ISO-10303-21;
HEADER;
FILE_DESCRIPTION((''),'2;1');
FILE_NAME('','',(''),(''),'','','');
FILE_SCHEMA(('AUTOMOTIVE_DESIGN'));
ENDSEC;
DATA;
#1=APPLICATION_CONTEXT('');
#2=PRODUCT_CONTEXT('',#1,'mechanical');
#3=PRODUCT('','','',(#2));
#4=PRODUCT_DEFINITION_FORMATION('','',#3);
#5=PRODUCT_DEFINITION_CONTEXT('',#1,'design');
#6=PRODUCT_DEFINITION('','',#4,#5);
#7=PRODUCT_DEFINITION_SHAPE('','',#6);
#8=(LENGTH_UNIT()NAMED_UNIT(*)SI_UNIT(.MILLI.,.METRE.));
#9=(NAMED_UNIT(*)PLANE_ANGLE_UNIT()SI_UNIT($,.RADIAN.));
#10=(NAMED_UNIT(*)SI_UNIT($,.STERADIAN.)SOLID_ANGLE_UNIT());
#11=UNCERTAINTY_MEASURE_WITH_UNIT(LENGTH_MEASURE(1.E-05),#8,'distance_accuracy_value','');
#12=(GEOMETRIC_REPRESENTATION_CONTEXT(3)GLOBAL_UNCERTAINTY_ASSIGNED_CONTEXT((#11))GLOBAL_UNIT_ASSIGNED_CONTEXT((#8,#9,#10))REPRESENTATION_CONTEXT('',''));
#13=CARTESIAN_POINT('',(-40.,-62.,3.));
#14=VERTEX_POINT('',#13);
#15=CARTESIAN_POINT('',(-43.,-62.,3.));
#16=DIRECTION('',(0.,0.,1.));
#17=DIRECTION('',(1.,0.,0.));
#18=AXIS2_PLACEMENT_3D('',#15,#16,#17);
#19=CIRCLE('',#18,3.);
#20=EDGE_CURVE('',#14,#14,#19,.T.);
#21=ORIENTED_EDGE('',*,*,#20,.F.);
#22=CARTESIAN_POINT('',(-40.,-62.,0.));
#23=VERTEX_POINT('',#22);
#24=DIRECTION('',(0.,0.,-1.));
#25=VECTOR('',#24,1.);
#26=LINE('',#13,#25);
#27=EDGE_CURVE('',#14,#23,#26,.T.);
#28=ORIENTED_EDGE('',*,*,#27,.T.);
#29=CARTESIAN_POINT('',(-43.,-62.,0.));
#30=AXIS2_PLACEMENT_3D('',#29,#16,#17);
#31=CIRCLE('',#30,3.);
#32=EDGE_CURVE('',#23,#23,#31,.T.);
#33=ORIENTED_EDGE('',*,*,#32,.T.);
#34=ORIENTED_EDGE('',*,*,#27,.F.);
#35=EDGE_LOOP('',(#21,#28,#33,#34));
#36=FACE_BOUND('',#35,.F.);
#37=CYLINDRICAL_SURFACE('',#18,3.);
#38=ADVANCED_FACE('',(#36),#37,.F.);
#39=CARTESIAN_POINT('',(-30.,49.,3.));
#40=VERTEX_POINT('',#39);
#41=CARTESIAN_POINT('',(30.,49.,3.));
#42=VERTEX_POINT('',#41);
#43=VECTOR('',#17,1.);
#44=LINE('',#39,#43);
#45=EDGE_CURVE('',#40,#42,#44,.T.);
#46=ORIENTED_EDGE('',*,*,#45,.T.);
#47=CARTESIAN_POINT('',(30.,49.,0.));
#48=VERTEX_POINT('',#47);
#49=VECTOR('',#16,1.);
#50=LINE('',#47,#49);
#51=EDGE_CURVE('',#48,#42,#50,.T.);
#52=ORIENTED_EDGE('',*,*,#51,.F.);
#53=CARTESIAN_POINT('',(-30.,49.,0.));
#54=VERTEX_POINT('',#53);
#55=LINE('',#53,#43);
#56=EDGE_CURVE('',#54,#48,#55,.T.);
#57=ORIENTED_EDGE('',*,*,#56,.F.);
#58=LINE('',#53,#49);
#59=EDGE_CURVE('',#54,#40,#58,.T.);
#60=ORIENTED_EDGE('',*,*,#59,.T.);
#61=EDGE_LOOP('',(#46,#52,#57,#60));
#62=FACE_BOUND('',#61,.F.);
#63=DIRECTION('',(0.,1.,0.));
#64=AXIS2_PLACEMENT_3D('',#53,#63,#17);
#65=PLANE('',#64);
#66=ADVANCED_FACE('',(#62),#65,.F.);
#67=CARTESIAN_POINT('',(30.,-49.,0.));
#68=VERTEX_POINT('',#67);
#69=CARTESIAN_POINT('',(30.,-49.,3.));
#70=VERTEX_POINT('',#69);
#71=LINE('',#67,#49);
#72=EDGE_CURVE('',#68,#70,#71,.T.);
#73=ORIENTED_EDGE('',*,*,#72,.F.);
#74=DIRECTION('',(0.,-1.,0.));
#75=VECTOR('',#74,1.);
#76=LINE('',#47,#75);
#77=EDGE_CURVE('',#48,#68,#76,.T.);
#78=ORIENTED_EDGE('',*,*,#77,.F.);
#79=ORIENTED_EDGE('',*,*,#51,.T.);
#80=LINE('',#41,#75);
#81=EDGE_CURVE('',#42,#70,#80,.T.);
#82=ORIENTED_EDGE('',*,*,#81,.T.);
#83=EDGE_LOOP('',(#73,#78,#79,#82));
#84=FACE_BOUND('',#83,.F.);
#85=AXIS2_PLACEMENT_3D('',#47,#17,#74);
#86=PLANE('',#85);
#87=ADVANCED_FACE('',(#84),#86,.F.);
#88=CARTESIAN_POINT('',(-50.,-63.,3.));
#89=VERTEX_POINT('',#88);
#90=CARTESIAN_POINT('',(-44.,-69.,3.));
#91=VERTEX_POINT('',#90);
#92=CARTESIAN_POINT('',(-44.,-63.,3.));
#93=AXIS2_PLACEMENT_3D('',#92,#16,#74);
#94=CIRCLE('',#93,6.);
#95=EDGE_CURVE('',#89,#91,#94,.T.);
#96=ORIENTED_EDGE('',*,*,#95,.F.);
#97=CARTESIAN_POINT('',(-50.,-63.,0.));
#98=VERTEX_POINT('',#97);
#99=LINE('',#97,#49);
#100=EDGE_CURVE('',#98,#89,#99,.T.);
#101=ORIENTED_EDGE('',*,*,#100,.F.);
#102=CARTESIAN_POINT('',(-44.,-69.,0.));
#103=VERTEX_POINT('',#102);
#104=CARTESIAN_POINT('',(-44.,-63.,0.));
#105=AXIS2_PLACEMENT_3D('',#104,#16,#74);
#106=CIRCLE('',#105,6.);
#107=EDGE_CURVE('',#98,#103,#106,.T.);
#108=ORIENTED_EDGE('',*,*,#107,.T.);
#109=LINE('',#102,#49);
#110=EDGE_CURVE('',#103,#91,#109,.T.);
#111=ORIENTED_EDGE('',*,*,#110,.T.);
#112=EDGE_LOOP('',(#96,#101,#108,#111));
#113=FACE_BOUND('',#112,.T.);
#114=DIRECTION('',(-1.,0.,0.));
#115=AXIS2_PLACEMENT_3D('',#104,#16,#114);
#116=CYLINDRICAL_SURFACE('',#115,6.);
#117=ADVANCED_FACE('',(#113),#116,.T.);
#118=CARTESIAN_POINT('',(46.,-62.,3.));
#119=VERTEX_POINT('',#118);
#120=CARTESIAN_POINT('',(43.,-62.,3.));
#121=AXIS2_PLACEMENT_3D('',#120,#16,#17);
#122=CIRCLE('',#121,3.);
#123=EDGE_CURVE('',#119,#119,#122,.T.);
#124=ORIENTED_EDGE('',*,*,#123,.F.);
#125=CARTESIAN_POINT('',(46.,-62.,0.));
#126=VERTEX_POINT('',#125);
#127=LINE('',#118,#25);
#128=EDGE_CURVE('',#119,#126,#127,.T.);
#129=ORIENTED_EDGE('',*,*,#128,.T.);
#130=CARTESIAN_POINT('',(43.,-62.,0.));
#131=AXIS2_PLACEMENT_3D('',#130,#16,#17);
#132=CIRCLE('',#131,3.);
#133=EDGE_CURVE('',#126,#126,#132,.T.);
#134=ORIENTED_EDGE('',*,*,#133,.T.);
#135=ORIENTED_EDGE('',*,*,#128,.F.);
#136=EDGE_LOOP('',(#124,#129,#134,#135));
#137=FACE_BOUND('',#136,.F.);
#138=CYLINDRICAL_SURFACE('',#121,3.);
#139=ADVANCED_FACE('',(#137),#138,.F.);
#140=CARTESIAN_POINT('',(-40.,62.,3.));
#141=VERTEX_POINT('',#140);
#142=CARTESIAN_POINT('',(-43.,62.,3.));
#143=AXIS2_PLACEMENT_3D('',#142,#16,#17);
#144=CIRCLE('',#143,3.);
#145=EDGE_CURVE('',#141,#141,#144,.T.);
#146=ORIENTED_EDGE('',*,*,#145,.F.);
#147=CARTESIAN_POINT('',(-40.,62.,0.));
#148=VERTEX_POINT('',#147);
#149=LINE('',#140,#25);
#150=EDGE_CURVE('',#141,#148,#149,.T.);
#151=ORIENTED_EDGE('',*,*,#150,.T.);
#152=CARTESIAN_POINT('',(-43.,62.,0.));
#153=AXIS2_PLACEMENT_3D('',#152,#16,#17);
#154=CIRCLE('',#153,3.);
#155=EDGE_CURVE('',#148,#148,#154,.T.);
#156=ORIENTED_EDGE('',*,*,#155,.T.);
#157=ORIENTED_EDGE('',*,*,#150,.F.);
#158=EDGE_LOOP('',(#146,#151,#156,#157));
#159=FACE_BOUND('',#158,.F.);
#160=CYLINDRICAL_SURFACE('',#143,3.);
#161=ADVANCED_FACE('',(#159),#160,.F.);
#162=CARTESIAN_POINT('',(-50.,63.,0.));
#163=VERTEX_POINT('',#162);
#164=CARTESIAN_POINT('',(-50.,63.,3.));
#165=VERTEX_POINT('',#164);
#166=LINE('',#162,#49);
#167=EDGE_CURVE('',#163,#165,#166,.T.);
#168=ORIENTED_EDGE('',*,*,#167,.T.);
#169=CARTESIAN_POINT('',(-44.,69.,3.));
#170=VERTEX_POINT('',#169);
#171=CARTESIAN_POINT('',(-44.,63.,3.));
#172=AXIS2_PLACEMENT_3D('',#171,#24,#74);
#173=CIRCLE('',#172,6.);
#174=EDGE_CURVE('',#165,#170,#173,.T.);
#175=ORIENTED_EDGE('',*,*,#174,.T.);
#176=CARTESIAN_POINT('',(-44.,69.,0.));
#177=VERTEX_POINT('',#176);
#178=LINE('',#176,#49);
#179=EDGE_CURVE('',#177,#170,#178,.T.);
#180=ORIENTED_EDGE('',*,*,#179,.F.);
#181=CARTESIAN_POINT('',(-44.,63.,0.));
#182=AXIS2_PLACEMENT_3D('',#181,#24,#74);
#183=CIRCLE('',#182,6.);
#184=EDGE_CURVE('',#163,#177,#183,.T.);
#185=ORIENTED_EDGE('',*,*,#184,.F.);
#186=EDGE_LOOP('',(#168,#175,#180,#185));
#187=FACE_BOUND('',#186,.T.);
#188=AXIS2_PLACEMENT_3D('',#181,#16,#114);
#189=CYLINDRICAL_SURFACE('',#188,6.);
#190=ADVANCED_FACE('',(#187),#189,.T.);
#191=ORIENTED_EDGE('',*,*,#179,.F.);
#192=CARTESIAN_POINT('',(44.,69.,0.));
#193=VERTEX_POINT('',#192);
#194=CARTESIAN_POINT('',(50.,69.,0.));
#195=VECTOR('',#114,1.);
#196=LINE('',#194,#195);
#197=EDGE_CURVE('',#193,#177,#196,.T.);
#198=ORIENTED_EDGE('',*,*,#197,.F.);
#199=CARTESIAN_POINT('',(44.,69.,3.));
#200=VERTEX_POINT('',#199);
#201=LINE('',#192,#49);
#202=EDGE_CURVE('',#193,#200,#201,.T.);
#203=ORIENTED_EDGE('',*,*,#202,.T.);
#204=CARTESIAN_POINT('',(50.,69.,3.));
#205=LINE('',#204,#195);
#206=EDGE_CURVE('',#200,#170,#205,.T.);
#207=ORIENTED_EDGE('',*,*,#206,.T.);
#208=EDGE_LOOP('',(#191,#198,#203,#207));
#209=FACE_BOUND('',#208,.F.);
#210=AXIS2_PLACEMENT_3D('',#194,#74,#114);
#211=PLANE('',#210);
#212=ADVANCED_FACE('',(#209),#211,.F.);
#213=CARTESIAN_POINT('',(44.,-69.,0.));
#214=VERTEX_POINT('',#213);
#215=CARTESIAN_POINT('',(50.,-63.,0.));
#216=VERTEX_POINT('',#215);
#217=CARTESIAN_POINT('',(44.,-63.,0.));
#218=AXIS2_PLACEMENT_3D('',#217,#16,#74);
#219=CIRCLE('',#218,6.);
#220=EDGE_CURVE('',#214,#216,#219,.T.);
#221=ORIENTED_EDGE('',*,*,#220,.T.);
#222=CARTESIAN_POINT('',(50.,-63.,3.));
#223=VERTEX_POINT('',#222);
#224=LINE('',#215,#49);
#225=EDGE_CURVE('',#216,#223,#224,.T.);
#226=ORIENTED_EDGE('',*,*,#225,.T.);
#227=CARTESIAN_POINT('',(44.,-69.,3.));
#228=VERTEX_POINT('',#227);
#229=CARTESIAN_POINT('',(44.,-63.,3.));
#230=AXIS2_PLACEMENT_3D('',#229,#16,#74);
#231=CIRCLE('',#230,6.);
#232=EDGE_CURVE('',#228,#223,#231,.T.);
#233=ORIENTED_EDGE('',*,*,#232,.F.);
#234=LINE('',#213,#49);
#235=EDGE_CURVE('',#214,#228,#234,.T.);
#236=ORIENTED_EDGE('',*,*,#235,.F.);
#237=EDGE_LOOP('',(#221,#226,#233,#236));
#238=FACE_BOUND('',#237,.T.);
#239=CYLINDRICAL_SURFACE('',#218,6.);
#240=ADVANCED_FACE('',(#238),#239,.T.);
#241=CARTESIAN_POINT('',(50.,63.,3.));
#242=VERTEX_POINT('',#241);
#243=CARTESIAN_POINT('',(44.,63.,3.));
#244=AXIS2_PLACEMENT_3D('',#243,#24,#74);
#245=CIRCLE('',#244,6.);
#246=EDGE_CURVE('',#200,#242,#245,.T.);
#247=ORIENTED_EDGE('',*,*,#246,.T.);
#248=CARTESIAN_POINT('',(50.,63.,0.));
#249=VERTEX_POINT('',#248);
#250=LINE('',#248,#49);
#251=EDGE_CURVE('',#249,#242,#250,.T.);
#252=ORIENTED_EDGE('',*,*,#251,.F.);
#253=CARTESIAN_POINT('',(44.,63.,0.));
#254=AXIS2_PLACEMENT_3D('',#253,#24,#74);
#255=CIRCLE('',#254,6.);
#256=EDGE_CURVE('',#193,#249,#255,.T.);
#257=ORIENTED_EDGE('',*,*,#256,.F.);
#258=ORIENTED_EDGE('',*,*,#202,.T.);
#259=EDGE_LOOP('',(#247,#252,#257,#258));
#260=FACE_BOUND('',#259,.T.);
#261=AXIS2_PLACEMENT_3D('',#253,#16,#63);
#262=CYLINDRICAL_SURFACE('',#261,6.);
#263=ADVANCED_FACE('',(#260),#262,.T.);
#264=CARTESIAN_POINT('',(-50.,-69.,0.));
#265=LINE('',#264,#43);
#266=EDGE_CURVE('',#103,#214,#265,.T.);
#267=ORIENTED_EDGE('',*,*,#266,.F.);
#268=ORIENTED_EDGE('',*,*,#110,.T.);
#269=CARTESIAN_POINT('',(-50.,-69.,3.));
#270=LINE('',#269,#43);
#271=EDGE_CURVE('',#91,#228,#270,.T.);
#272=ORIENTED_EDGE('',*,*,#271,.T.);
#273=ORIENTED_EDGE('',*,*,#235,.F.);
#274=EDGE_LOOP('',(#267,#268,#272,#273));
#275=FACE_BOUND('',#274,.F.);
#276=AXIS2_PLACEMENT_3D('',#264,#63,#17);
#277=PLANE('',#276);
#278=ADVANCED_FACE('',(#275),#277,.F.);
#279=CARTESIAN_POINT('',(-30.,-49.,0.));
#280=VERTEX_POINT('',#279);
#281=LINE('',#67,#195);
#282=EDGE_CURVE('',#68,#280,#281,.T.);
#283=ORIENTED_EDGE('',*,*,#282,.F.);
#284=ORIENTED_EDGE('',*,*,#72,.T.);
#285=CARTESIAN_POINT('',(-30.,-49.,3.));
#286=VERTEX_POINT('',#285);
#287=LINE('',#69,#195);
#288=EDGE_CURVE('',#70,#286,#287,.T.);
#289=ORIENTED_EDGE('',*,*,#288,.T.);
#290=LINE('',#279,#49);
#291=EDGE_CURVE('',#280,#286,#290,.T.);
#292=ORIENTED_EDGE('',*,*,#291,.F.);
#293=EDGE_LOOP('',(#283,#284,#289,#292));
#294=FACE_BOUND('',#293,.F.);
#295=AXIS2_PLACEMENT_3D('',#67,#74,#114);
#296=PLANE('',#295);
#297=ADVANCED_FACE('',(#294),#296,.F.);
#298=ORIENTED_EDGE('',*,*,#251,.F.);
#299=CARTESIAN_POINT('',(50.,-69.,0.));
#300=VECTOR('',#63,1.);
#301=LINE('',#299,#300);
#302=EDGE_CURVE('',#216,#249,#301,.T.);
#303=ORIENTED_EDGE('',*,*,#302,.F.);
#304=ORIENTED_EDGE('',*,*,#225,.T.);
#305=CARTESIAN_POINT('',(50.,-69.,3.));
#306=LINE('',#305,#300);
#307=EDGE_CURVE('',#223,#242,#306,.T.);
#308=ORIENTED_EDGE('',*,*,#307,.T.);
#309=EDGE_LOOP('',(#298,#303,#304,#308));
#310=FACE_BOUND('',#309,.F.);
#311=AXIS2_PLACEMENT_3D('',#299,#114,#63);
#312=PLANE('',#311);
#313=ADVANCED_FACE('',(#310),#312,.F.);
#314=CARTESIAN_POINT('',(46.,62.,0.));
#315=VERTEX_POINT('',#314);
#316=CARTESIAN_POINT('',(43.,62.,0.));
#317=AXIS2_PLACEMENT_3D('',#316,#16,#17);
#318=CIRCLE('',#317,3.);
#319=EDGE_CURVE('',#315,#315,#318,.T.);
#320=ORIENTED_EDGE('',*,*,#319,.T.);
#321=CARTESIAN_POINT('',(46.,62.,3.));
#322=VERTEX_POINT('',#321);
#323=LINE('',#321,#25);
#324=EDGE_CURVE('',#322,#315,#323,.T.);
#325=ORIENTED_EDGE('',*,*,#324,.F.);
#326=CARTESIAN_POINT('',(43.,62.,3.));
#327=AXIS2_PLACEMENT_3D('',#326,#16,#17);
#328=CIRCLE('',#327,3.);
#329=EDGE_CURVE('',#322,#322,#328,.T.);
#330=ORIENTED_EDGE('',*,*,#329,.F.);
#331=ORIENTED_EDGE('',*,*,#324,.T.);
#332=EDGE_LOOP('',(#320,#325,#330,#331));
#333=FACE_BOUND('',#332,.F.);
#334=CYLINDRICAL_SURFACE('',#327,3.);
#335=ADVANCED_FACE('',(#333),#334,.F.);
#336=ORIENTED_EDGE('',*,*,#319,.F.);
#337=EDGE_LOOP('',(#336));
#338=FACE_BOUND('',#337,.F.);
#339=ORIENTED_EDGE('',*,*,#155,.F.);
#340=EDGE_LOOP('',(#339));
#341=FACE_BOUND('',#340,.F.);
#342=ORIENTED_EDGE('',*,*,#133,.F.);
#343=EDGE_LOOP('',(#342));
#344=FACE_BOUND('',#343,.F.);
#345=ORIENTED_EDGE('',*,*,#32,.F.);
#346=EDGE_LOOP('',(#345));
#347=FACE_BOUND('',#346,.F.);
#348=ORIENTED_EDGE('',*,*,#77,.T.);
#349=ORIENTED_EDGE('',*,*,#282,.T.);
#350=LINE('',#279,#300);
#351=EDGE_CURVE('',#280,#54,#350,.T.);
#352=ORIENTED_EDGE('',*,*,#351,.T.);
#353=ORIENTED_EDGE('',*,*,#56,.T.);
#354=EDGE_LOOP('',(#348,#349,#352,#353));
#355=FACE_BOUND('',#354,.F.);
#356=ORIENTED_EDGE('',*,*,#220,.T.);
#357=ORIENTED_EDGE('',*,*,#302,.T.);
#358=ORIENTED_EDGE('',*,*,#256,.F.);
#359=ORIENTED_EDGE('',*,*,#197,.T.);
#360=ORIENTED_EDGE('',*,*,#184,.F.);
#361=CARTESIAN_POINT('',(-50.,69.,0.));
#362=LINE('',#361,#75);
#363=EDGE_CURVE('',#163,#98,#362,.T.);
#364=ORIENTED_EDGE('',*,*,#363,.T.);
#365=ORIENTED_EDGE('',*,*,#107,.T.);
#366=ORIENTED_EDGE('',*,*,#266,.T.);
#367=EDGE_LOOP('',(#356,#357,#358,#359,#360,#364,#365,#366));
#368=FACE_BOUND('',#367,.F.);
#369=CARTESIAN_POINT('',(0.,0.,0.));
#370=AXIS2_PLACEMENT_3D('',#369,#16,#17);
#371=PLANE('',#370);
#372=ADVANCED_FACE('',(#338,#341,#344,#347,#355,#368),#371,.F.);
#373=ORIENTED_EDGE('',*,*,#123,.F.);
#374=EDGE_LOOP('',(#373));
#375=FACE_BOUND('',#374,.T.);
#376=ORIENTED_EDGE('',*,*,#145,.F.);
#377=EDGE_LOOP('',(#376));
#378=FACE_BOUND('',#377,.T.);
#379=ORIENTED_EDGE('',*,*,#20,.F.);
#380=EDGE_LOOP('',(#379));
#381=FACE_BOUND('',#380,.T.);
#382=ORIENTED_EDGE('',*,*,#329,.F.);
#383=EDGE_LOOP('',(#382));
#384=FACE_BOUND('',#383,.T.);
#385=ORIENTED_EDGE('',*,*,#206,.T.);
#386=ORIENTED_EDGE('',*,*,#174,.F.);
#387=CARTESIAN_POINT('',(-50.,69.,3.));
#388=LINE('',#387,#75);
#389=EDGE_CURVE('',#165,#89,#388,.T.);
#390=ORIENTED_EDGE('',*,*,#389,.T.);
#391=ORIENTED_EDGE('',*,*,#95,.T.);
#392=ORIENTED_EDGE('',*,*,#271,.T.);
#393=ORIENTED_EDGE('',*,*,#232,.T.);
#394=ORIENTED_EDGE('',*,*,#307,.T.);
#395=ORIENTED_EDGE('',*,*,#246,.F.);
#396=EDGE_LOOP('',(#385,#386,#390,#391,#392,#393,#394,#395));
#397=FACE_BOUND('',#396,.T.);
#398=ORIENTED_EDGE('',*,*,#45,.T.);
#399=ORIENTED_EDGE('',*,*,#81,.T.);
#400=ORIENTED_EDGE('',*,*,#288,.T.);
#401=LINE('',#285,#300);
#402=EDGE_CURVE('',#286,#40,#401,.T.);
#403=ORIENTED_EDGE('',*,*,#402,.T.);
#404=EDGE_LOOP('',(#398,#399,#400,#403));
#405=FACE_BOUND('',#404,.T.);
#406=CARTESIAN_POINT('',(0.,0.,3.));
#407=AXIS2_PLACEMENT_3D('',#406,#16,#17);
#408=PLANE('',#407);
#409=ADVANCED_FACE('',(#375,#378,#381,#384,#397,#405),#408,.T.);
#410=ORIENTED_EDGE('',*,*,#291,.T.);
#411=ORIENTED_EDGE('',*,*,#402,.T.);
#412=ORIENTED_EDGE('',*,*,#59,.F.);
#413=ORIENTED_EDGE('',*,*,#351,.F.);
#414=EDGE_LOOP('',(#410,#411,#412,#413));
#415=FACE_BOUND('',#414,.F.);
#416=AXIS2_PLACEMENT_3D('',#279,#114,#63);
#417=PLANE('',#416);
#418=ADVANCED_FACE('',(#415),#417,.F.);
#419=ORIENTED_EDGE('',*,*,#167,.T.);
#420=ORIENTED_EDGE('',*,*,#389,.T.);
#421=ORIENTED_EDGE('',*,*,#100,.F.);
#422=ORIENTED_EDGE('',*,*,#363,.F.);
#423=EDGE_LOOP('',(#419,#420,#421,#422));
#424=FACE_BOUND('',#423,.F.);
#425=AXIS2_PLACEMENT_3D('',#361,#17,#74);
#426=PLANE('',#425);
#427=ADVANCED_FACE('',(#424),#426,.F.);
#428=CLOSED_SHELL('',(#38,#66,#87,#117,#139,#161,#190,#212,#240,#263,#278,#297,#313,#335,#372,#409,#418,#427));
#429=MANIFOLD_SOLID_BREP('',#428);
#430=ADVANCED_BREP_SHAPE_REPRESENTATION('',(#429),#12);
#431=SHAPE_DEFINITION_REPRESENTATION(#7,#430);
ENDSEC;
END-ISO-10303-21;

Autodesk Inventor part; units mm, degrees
ref_plane "YZ Plane" through (0, 0, 0) normal (1, 0, 0) x (0, 1, 0)
ref_plane "XZ Plane" through (0, 0, 0) normal (0, 1, 0) x (-1, 0, 0)
ref_plane "XY Plane" through (0, 0, 0) normal (0, 0, 1) x (1, 0, 0)
sketch "Sketch1" plane through (0, 0, 0) normal (0, 0, 1) x (1, 0, 0)
  line L0 (-50, -69) -> (50, -69)
  line L1 (50, -69) -> (50, 69)
  line L2 (50, 69) -> (-50, 69)
  line L3 (-50, 69) -> (-50, -69)
  line L4 (-50, -69) -> (50, 69) construction
  line L5 (50, -69) -> (-50, 69) construction
  line L6 (30, -49) -> (-30, -49)
  line L7 (-30, -49) -> (-30, 49)
  line L8 (-30, 49) -> (30, 49)
  line L9 (30, 49) -> (30, -49)
  line L10 (30, -49) -> (-30, 49) construction
  line L11 (-30, -49) -> (30, 49) construction
  point P0 (0, 0)
  dimension "d172" = 60
  dimension "d180" = 20
  dimension "d181" = 20
  dimension "d182" = 98
extrude "Plate5" add sketch "Sketch1" along normal blind 3
sketch "Sketch9" plane through (0, 0, 3) normal (0, 0, 1) x (1, 0, 0)
  circle A0 centre (43, -62) radius 3
  line L0 (43, 62) -> (-43, 62) construction
  line L1 (-43, 62) -> (-43, -62) construction
  line L2 (-43, -62) -> (43, -62) construction
  line L3 (43, -62) -> (43, 62) construction
  line L4 (43, 62) -> (-43, -62) construction
  line L5 (-43, 62) -> (43, -62) construction
  circle A1 centre (-43, -62) radius 3
  circle A2 centre (43, 62) radius 3
  circle A3 centre (-43, 62) radius 3
  line L6 (-30, -49) -> (-30, 49) projected
  line L7 (-30, 49) -> (30, 49) projected
  line L8 (30, 49) -> (30, -49) projected
  line L9 (30, -49) -> (-30, -49) projected
  line L10 (50, -69) -> (-50, -69) projected
  line L11 (50, 69) -> (50, -69) projected
  line L12 (-50, 69) -> (50, 69) projected
  line L13 (-50, -69) -> (-50, 69) projected
  circle A4 centre (-43, 0) radius 3 construction
  circle A5 centre (43, 0) radius 3 construction
  point P0 (0, 0)
  dimension "d174" = 6
  dimension "d183" = 7
  dimension "d184" = 7
extrude "Cut2" cut sketch "Sketch9" against normal blind 3 contours A0 | A1 | A2 | A3
fillet "Corner Round1" radius 6 4 edges at (50, 69, 1.5) (-50, 69, 1.5) (-50, -69, 1.5) (50, -69, 1.5)
properties part number "PRS 940-51 FDS Diam way flange 1" material "Stainless Steel"
